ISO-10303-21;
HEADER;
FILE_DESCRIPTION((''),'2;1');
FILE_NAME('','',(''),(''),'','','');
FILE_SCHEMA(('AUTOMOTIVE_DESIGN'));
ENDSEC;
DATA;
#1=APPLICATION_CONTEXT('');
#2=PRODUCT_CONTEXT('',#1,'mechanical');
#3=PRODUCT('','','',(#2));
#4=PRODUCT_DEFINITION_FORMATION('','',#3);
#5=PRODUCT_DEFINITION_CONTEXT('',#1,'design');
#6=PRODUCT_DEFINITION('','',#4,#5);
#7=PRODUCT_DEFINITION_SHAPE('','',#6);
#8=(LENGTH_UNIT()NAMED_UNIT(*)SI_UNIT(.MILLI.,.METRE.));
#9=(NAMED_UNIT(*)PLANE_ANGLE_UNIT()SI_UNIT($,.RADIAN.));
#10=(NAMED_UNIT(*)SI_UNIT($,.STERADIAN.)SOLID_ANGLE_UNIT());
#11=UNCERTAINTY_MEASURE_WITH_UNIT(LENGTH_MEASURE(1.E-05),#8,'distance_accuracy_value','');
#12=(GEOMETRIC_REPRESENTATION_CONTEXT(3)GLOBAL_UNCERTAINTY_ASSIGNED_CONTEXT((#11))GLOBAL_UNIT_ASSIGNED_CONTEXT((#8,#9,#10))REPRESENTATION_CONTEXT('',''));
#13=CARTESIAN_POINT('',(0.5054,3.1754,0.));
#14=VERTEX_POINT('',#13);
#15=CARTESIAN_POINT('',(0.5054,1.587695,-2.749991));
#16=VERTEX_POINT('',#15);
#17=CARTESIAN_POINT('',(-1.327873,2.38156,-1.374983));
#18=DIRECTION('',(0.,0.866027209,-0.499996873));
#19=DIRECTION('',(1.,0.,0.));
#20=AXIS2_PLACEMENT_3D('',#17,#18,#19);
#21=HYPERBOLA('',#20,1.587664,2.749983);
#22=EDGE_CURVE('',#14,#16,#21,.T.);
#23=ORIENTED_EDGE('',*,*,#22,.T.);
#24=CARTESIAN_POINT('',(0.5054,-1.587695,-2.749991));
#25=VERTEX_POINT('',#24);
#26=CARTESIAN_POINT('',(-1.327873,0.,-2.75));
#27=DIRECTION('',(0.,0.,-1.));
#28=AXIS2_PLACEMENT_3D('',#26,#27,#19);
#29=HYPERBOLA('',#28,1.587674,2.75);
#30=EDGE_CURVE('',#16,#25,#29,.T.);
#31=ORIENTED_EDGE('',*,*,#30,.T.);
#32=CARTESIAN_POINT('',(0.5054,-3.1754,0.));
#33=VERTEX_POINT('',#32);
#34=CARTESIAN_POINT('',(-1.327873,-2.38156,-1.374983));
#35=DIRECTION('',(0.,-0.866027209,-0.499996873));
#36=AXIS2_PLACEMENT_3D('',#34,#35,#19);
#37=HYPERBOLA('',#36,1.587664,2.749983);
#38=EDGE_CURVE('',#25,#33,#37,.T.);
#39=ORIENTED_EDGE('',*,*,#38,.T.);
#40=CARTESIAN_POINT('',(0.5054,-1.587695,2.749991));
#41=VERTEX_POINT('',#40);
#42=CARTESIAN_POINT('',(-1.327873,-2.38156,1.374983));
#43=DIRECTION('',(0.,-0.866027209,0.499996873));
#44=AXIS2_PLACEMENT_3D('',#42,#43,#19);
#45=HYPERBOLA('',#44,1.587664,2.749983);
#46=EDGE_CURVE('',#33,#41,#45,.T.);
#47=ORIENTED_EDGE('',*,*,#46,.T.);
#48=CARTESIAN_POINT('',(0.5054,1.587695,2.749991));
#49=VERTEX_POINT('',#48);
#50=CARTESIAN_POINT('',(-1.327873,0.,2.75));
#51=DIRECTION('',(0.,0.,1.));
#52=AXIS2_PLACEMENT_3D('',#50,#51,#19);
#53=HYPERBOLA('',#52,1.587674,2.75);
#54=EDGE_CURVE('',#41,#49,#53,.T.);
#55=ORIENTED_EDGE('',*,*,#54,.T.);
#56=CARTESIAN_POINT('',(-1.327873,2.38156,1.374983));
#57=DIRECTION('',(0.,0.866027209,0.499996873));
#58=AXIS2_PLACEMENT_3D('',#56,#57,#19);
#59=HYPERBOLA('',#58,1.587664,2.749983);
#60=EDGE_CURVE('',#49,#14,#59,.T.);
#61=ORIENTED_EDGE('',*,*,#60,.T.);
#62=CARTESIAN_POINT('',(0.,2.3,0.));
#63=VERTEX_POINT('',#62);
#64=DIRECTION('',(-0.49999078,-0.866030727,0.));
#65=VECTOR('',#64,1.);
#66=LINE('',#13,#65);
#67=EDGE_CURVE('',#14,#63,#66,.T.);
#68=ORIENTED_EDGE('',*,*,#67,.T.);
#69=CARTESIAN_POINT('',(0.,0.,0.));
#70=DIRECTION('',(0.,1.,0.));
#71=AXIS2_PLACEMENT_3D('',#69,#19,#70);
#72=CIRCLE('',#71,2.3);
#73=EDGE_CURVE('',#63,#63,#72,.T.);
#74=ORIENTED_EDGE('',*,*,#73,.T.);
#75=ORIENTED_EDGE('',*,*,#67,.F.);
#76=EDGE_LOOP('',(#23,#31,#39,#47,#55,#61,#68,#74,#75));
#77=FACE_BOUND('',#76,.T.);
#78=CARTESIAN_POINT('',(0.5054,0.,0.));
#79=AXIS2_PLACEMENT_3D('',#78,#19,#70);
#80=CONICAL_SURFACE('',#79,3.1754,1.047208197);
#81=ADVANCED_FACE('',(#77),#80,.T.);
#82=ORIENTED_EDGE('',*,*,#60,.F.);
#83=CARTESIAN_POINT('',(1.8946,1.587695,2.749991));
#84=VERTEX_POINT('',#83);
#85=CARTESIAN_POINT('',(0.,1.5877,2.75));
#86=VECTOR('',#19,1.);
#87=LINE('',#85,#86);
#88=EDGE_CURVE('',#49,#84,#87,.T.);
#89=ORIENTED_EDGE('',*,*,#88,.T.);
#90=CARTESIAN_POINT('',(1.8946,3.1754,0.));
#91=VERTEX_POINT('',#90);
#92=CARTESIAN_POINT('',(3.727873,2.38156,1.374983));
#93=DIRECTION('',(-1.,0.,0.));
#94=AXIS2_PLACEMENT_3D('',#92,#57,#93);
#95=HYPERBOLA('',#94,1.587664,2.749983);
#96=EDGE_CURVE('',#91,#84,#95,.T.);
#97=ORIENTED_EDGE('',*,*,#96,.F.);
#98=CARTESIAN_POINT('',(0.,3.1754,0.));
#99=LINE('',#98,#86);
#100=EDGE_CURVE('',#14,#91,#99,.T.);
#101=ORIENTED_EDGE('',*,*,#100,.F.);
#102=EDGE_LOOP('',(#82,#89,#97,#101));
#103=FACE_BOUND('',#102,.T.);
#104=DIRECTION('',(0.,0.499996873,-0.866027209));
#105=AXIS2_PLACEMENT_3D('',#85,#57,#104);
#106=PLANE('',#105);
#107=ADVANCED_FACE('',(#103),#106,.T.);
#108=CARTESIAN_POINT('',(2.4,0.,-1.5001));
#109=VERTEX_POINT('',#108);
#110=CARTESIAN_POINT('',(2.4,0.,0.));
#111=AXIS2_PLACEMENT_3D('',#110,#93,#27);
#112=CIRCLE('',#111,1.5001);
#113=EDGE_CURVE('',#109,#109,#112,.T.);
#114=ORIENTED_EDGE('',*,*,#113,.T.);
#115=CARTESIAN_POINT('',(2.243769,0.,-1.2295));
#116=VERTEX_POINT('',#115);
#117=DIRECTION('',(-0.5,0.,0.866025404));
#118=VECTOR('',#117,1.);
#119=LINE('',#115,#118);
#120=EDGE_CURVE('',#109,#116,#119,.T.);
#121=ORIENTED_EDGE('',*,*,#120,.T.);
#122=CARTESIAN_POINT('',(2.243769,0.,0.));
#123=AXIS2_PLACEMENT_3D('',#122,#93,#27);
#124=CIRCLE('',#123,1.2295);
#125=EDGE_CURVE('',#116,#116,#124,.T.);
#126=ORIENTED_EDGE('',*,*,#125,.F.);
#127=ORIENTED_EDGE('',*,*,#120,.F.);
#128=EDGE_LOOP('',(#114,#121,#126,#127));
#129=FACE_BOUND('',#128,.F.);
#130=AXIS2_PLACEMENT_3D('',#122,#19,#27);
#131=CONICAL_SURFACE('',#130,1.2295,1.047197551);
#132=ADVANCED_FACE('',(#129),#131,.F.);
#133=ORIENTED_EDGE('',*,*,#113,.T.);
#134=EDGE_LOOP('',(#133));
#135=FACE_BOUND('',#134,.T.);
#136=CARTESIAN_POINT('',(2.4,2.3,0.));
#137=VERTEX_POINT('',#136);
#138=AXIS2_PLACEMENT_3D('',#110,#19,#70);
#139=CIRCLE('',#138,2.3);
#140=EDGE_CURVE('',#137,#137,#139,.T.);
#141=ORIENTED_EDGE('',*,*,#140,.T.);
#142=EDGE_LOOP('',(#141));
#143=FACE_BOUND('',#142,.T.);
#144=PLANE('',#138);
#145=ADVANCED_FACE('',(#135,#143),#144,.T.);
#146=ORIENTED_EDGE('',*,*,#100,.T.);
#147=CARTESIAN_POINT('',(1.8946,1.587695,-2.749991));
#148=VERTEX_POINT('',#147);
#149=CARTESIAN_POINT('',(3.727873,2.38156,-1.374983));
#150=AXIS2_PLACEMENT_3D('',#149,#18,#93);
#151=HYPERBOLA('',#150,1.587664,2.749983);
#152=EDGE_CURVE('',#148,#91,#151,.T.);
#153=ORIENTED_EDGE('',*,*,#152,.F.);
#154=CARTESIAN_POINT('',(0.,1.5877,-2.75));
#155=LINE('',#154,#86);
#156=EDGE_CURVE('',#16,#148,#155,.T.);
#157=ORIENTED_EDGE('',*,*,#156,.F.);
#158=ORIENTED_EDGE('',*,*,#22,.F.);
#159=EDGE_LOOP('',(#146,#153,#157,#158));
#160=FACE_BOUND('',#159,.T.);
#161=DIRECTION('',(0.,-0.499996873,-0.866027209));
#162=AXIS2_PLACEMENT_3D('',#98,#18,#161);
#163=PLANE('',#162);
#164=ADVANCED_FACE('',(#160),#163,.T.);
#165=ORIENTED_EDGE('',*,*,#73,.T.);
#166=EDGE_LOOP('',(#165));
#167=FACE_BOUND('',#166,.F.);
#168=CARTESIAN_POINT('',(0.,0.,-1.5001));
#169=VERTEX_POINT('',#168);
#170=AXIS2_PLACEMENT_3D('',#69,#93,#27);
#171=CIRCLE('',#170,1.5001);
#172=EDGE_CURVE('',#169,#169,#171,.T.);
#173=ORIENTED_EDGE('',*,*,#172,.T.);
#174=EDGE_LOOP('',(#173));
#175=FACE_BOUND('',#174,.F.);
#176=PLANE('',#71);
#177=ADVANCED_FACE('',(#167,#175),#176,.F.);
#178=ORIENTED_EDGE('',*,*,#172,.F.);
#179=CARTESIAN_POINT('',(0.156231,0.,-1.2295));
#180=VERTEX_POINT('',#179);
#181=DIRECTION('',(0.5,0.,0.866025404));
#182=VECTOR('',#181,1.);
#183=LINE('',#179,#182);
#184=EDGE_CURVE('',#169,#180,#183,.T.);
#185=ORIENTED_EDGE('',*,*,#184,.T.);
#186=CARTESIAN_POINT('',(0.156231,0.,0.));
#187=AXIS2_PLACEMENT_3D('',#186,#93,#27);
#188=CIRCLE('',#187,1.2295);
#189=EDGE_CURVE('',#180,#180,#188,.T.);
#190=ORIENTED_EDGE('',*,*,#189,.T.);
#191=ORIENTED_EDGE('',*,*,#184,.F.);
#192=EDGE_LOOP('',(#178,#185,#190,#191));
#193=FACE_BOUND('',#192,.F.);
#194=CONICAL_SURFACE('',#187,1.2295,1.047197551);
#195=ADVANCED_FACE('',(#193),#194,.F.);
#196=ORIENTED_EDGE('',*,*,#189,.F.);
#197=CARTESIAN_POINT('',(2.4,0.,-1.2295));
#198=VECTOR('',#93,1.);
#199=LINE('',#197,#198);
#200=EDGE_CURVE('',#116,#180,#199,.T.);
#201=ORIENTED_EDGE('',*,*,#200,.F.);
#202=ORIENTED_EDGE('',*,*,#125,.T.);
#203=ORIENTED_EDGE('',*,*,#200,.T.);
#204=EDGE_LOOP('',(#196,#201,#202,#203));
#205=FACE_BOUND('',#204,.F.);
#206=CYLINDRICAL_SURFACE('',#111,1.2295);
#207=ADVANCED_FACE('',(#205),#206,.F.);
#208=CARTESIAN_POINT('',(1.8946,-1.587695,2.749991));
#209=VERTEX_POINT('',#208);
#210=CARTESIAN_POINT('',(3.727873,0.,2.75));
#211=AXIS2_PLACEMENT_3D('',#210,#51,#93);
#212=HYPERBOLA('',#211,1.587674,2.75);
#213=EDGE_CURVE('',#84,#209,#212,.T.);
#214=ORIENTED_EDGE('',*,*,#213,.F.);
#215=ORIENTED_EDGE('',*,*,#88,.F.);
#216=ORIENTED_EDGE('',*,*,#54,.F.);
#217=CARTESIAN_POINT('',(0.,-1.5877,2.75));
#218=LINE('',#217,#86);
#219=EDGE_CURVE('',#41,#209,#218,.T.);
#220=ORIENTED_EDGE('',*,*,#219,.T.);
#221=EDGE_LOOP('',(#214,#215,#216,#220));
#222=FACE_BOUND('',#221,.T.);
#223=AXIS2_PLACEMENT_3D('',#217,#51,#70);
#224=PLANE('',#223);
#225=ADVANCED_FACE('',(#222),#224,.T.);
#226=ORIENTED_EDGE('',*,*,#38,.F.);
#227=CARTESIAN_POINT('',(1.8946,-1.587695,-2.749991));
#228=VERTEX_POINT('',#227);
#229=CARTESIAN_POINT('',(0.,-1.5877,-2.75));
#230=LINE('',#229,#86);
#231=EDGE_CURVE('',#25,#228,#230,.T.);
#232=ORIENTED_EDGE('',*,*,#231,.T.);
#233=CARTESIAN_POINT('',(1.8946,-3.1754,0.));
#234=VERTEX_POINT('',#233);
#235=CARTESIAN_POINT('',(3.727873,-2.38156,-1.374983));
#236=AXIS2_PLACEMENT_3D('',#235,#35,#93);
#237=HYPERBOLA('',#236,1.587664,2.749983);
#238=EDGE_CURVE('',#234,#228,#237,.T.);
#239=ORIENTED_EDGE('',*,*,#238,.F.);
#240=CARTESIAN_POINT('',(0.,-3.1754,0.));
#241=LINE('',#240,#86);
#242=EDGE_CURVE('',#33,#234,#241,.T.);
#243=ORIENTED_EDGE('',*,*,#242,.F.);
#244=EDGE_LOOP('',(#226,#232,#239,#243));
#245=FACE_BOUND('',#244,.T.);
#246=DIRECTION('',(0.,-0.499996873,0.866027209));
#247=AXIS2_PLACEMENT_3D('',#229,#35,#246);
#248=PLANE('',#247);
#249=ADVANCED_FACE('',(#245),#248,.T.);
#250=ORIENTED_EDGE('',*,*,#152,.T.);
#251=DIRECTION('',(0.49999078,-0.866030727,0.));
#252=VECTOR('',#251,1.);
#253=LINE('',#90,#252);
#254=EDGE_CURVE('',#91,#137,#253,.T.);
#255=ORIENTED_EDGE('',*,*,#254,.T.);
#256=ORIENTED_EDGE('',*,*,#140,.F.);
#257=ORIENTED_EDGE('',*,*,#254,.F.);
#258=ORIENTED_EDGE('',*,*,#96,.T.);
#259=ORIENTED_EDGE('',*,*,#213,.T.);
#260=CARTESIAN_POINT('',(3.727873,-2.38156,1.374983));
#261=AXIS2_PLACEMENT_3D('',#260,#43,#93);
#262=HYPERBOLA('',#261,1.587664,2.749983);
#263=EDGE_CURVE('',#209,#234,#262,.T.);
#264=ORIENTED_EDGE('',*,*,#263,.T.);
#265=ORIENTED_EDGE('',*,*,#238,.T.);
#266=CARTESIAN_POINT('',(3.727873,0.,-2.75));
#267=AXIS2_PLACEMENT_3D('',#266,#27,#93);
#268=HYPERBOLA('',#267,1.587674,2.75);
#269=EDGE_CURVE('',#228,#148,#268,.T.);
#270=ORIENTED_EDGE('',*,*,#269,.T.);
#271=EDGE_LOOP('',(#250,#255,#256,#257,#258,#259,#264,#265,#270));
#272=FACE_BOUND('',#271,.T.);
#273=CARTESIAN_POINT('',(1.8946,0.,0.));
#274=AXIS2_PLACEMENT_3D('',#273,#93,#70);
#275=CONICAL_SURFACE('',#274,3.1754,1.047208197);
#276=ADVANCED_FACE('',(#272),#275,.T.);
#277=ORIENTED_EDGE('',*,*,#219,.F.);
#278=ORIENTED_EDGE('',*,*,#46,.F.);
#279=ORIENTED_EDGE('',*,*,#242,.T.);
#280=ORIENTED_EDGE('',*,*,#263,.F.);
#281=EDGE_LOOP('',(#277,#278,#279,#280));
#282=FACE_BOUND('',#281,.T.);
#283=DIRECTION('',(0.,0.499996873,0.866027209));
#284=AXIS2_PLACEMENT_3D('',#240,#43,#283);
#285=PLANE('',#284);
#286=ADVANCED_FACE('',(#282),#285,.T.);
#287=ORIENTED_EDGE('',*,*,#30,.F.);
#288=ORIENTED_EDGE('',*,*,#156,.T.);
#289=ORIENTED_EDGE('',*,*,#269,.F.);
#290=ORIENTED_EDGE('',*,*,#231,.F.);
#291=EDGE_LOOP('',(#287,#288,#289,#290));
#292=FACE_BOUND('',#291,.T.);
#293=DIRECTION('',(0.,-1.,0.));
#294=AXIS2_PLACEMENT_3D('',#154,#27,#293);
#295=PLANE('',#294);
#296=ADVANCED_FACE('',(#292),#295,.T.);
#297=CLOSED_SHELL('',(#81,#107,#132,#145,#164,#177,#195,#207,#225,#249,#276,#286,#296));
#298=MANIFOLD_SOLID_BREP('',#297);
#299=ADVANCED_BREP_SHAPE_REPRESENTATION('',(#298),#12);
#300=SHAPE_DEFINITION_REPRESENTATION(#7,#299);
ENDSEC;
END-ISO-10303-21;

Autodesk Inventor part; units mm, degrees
ref_plane "YZ Plane" through (0, 0, 0) normal (1, 0, 0) x (0, 1, 0)
ref_plane "XZ Plane" through (0, 0, 0) normal (0, 1, 0) x (-1, 0, 0)
sketch "Sketch1" plane through (0, 0, 0) normal (1, 0, 0) x (0, 1, 0)
  line L0 (-3.1754, 0) -> (-1.5877, 2.75)
  line L1 (-1.5877, 2.75) -> (1.5877, 2.75)
  line L2 (1.5877, 2.75) -> (3.1754, 0)
  line L3 (3.1754, 0) -> (1.5877, -2.75)
  line L4 (1.5877, -2.75) -> (-1.5877, -2.75)
  line L5 (-1.5877, -2.75) -> (-3.1754, 0)
  point P0 (0, 0)
  point P1 (0, 0)
  dimension "d0" = 6.3509
extrude "Body" add sketch "Sketch1" along normal blind 2.4
sketch "Sketch2" plane through (0, 0, 0) normal (0, 0, 1) x (1, 0, 0)
  line L0 (0, 1.5877) -> (0, 3.1754) projected
  line L1 (0, 3.1754) -> (2.4, 3.1754) projected
  line L2 (2.4, 1.5877) -> (2.4, 3.1754) projected
  line L3 (-0.48, 0) -> (2.88, 0) projected
  line L4 (0.5054, 3.1754) -> (0, 2.3)
  line L5 (1.8946, 3.1754) -> (2.4, 2.3)
  dimension "d3" = 30
  dimension "d4" = 30
  dimension "d5" = 4.6
  dimension "d6" = 4.6
revolve "Chamfer1" cut sketch "Sketch2" angle 360 about axis through (-10, 0, 0) along (1, 0, 0)
sketch "Sketch3" plane through (2.4, 0, 0) normal (1, 0, 0) x (0, 0, -1)
  arc A0 (-0.625, -1.0825) -> (0.625, -1.0825) centre (0, 0) ccw projected
hole "Thread" at (2.4, 0, 0) direction (-1, 0, 0) diameter 2.459 end through all thread size "M3x0.5" class "6H" standard "ISO Metric profile"
chamfer "Chamfer2" distance 0.2706 angle 30 1 edges at (2.4, 0, 1.2295) measured on face at (2.4, 1.9179, -0.2329)
chamfer "Chamfer3" distance 0.2706 angle 30 1 edges at (0, 0, 1.2295) measured on face at (0, 1.9179, -0.2329)
ref_plane "Work Plane1" through (-6.3375, 0, 0) normal (0, -0.8660254, -0.5) x (1, 0, 0)
equation "\"d0\" = 1.1547 * SW"
equation "\"d1\" = KOH"
equation "\"d3\" = ANG1"
equation "\"d4\" = ANG2"
equation "\"d5\" = SW0"
equation "\"d6\" = SW01"
equation "\"d8\" = -0.5 * GD1 + 0.5 * NND"
equation "\"d40\" = -0.5 * GD1 + 0.5 * NND"
equation "\"d10\" = -0.5 * GD1 + 0.5 * NND"
equation "\"d41\" = -0.5 * GD1 + 0.5 * NND"
equation "\"ANG1\" = 30deg"
equation "\"ANG2\" = 30deg"
equation "\"NND\" = 3"
equation "\"KOH\" = 2.4"
equation "\"SW\" = 5.5"
equation "\"SW0\" = 4.6"
equation "\"SW01\" = 4.6"
equation "\"GUL\" = 0.541266 * PTC"
equation "\"THREADDIA\" = 3"
equation "\"TOA\" = 30deg"
equation "\"PTC\" = 0.5"
equation "\"E0\" = 1.155 * SW"
equation "\"GAL\" = 0.541266 * PTC"
equation "\"GD1\" = 2.458734"
properties part number "ISO 4032 - M3" material "Stainless Steel, 440C"
